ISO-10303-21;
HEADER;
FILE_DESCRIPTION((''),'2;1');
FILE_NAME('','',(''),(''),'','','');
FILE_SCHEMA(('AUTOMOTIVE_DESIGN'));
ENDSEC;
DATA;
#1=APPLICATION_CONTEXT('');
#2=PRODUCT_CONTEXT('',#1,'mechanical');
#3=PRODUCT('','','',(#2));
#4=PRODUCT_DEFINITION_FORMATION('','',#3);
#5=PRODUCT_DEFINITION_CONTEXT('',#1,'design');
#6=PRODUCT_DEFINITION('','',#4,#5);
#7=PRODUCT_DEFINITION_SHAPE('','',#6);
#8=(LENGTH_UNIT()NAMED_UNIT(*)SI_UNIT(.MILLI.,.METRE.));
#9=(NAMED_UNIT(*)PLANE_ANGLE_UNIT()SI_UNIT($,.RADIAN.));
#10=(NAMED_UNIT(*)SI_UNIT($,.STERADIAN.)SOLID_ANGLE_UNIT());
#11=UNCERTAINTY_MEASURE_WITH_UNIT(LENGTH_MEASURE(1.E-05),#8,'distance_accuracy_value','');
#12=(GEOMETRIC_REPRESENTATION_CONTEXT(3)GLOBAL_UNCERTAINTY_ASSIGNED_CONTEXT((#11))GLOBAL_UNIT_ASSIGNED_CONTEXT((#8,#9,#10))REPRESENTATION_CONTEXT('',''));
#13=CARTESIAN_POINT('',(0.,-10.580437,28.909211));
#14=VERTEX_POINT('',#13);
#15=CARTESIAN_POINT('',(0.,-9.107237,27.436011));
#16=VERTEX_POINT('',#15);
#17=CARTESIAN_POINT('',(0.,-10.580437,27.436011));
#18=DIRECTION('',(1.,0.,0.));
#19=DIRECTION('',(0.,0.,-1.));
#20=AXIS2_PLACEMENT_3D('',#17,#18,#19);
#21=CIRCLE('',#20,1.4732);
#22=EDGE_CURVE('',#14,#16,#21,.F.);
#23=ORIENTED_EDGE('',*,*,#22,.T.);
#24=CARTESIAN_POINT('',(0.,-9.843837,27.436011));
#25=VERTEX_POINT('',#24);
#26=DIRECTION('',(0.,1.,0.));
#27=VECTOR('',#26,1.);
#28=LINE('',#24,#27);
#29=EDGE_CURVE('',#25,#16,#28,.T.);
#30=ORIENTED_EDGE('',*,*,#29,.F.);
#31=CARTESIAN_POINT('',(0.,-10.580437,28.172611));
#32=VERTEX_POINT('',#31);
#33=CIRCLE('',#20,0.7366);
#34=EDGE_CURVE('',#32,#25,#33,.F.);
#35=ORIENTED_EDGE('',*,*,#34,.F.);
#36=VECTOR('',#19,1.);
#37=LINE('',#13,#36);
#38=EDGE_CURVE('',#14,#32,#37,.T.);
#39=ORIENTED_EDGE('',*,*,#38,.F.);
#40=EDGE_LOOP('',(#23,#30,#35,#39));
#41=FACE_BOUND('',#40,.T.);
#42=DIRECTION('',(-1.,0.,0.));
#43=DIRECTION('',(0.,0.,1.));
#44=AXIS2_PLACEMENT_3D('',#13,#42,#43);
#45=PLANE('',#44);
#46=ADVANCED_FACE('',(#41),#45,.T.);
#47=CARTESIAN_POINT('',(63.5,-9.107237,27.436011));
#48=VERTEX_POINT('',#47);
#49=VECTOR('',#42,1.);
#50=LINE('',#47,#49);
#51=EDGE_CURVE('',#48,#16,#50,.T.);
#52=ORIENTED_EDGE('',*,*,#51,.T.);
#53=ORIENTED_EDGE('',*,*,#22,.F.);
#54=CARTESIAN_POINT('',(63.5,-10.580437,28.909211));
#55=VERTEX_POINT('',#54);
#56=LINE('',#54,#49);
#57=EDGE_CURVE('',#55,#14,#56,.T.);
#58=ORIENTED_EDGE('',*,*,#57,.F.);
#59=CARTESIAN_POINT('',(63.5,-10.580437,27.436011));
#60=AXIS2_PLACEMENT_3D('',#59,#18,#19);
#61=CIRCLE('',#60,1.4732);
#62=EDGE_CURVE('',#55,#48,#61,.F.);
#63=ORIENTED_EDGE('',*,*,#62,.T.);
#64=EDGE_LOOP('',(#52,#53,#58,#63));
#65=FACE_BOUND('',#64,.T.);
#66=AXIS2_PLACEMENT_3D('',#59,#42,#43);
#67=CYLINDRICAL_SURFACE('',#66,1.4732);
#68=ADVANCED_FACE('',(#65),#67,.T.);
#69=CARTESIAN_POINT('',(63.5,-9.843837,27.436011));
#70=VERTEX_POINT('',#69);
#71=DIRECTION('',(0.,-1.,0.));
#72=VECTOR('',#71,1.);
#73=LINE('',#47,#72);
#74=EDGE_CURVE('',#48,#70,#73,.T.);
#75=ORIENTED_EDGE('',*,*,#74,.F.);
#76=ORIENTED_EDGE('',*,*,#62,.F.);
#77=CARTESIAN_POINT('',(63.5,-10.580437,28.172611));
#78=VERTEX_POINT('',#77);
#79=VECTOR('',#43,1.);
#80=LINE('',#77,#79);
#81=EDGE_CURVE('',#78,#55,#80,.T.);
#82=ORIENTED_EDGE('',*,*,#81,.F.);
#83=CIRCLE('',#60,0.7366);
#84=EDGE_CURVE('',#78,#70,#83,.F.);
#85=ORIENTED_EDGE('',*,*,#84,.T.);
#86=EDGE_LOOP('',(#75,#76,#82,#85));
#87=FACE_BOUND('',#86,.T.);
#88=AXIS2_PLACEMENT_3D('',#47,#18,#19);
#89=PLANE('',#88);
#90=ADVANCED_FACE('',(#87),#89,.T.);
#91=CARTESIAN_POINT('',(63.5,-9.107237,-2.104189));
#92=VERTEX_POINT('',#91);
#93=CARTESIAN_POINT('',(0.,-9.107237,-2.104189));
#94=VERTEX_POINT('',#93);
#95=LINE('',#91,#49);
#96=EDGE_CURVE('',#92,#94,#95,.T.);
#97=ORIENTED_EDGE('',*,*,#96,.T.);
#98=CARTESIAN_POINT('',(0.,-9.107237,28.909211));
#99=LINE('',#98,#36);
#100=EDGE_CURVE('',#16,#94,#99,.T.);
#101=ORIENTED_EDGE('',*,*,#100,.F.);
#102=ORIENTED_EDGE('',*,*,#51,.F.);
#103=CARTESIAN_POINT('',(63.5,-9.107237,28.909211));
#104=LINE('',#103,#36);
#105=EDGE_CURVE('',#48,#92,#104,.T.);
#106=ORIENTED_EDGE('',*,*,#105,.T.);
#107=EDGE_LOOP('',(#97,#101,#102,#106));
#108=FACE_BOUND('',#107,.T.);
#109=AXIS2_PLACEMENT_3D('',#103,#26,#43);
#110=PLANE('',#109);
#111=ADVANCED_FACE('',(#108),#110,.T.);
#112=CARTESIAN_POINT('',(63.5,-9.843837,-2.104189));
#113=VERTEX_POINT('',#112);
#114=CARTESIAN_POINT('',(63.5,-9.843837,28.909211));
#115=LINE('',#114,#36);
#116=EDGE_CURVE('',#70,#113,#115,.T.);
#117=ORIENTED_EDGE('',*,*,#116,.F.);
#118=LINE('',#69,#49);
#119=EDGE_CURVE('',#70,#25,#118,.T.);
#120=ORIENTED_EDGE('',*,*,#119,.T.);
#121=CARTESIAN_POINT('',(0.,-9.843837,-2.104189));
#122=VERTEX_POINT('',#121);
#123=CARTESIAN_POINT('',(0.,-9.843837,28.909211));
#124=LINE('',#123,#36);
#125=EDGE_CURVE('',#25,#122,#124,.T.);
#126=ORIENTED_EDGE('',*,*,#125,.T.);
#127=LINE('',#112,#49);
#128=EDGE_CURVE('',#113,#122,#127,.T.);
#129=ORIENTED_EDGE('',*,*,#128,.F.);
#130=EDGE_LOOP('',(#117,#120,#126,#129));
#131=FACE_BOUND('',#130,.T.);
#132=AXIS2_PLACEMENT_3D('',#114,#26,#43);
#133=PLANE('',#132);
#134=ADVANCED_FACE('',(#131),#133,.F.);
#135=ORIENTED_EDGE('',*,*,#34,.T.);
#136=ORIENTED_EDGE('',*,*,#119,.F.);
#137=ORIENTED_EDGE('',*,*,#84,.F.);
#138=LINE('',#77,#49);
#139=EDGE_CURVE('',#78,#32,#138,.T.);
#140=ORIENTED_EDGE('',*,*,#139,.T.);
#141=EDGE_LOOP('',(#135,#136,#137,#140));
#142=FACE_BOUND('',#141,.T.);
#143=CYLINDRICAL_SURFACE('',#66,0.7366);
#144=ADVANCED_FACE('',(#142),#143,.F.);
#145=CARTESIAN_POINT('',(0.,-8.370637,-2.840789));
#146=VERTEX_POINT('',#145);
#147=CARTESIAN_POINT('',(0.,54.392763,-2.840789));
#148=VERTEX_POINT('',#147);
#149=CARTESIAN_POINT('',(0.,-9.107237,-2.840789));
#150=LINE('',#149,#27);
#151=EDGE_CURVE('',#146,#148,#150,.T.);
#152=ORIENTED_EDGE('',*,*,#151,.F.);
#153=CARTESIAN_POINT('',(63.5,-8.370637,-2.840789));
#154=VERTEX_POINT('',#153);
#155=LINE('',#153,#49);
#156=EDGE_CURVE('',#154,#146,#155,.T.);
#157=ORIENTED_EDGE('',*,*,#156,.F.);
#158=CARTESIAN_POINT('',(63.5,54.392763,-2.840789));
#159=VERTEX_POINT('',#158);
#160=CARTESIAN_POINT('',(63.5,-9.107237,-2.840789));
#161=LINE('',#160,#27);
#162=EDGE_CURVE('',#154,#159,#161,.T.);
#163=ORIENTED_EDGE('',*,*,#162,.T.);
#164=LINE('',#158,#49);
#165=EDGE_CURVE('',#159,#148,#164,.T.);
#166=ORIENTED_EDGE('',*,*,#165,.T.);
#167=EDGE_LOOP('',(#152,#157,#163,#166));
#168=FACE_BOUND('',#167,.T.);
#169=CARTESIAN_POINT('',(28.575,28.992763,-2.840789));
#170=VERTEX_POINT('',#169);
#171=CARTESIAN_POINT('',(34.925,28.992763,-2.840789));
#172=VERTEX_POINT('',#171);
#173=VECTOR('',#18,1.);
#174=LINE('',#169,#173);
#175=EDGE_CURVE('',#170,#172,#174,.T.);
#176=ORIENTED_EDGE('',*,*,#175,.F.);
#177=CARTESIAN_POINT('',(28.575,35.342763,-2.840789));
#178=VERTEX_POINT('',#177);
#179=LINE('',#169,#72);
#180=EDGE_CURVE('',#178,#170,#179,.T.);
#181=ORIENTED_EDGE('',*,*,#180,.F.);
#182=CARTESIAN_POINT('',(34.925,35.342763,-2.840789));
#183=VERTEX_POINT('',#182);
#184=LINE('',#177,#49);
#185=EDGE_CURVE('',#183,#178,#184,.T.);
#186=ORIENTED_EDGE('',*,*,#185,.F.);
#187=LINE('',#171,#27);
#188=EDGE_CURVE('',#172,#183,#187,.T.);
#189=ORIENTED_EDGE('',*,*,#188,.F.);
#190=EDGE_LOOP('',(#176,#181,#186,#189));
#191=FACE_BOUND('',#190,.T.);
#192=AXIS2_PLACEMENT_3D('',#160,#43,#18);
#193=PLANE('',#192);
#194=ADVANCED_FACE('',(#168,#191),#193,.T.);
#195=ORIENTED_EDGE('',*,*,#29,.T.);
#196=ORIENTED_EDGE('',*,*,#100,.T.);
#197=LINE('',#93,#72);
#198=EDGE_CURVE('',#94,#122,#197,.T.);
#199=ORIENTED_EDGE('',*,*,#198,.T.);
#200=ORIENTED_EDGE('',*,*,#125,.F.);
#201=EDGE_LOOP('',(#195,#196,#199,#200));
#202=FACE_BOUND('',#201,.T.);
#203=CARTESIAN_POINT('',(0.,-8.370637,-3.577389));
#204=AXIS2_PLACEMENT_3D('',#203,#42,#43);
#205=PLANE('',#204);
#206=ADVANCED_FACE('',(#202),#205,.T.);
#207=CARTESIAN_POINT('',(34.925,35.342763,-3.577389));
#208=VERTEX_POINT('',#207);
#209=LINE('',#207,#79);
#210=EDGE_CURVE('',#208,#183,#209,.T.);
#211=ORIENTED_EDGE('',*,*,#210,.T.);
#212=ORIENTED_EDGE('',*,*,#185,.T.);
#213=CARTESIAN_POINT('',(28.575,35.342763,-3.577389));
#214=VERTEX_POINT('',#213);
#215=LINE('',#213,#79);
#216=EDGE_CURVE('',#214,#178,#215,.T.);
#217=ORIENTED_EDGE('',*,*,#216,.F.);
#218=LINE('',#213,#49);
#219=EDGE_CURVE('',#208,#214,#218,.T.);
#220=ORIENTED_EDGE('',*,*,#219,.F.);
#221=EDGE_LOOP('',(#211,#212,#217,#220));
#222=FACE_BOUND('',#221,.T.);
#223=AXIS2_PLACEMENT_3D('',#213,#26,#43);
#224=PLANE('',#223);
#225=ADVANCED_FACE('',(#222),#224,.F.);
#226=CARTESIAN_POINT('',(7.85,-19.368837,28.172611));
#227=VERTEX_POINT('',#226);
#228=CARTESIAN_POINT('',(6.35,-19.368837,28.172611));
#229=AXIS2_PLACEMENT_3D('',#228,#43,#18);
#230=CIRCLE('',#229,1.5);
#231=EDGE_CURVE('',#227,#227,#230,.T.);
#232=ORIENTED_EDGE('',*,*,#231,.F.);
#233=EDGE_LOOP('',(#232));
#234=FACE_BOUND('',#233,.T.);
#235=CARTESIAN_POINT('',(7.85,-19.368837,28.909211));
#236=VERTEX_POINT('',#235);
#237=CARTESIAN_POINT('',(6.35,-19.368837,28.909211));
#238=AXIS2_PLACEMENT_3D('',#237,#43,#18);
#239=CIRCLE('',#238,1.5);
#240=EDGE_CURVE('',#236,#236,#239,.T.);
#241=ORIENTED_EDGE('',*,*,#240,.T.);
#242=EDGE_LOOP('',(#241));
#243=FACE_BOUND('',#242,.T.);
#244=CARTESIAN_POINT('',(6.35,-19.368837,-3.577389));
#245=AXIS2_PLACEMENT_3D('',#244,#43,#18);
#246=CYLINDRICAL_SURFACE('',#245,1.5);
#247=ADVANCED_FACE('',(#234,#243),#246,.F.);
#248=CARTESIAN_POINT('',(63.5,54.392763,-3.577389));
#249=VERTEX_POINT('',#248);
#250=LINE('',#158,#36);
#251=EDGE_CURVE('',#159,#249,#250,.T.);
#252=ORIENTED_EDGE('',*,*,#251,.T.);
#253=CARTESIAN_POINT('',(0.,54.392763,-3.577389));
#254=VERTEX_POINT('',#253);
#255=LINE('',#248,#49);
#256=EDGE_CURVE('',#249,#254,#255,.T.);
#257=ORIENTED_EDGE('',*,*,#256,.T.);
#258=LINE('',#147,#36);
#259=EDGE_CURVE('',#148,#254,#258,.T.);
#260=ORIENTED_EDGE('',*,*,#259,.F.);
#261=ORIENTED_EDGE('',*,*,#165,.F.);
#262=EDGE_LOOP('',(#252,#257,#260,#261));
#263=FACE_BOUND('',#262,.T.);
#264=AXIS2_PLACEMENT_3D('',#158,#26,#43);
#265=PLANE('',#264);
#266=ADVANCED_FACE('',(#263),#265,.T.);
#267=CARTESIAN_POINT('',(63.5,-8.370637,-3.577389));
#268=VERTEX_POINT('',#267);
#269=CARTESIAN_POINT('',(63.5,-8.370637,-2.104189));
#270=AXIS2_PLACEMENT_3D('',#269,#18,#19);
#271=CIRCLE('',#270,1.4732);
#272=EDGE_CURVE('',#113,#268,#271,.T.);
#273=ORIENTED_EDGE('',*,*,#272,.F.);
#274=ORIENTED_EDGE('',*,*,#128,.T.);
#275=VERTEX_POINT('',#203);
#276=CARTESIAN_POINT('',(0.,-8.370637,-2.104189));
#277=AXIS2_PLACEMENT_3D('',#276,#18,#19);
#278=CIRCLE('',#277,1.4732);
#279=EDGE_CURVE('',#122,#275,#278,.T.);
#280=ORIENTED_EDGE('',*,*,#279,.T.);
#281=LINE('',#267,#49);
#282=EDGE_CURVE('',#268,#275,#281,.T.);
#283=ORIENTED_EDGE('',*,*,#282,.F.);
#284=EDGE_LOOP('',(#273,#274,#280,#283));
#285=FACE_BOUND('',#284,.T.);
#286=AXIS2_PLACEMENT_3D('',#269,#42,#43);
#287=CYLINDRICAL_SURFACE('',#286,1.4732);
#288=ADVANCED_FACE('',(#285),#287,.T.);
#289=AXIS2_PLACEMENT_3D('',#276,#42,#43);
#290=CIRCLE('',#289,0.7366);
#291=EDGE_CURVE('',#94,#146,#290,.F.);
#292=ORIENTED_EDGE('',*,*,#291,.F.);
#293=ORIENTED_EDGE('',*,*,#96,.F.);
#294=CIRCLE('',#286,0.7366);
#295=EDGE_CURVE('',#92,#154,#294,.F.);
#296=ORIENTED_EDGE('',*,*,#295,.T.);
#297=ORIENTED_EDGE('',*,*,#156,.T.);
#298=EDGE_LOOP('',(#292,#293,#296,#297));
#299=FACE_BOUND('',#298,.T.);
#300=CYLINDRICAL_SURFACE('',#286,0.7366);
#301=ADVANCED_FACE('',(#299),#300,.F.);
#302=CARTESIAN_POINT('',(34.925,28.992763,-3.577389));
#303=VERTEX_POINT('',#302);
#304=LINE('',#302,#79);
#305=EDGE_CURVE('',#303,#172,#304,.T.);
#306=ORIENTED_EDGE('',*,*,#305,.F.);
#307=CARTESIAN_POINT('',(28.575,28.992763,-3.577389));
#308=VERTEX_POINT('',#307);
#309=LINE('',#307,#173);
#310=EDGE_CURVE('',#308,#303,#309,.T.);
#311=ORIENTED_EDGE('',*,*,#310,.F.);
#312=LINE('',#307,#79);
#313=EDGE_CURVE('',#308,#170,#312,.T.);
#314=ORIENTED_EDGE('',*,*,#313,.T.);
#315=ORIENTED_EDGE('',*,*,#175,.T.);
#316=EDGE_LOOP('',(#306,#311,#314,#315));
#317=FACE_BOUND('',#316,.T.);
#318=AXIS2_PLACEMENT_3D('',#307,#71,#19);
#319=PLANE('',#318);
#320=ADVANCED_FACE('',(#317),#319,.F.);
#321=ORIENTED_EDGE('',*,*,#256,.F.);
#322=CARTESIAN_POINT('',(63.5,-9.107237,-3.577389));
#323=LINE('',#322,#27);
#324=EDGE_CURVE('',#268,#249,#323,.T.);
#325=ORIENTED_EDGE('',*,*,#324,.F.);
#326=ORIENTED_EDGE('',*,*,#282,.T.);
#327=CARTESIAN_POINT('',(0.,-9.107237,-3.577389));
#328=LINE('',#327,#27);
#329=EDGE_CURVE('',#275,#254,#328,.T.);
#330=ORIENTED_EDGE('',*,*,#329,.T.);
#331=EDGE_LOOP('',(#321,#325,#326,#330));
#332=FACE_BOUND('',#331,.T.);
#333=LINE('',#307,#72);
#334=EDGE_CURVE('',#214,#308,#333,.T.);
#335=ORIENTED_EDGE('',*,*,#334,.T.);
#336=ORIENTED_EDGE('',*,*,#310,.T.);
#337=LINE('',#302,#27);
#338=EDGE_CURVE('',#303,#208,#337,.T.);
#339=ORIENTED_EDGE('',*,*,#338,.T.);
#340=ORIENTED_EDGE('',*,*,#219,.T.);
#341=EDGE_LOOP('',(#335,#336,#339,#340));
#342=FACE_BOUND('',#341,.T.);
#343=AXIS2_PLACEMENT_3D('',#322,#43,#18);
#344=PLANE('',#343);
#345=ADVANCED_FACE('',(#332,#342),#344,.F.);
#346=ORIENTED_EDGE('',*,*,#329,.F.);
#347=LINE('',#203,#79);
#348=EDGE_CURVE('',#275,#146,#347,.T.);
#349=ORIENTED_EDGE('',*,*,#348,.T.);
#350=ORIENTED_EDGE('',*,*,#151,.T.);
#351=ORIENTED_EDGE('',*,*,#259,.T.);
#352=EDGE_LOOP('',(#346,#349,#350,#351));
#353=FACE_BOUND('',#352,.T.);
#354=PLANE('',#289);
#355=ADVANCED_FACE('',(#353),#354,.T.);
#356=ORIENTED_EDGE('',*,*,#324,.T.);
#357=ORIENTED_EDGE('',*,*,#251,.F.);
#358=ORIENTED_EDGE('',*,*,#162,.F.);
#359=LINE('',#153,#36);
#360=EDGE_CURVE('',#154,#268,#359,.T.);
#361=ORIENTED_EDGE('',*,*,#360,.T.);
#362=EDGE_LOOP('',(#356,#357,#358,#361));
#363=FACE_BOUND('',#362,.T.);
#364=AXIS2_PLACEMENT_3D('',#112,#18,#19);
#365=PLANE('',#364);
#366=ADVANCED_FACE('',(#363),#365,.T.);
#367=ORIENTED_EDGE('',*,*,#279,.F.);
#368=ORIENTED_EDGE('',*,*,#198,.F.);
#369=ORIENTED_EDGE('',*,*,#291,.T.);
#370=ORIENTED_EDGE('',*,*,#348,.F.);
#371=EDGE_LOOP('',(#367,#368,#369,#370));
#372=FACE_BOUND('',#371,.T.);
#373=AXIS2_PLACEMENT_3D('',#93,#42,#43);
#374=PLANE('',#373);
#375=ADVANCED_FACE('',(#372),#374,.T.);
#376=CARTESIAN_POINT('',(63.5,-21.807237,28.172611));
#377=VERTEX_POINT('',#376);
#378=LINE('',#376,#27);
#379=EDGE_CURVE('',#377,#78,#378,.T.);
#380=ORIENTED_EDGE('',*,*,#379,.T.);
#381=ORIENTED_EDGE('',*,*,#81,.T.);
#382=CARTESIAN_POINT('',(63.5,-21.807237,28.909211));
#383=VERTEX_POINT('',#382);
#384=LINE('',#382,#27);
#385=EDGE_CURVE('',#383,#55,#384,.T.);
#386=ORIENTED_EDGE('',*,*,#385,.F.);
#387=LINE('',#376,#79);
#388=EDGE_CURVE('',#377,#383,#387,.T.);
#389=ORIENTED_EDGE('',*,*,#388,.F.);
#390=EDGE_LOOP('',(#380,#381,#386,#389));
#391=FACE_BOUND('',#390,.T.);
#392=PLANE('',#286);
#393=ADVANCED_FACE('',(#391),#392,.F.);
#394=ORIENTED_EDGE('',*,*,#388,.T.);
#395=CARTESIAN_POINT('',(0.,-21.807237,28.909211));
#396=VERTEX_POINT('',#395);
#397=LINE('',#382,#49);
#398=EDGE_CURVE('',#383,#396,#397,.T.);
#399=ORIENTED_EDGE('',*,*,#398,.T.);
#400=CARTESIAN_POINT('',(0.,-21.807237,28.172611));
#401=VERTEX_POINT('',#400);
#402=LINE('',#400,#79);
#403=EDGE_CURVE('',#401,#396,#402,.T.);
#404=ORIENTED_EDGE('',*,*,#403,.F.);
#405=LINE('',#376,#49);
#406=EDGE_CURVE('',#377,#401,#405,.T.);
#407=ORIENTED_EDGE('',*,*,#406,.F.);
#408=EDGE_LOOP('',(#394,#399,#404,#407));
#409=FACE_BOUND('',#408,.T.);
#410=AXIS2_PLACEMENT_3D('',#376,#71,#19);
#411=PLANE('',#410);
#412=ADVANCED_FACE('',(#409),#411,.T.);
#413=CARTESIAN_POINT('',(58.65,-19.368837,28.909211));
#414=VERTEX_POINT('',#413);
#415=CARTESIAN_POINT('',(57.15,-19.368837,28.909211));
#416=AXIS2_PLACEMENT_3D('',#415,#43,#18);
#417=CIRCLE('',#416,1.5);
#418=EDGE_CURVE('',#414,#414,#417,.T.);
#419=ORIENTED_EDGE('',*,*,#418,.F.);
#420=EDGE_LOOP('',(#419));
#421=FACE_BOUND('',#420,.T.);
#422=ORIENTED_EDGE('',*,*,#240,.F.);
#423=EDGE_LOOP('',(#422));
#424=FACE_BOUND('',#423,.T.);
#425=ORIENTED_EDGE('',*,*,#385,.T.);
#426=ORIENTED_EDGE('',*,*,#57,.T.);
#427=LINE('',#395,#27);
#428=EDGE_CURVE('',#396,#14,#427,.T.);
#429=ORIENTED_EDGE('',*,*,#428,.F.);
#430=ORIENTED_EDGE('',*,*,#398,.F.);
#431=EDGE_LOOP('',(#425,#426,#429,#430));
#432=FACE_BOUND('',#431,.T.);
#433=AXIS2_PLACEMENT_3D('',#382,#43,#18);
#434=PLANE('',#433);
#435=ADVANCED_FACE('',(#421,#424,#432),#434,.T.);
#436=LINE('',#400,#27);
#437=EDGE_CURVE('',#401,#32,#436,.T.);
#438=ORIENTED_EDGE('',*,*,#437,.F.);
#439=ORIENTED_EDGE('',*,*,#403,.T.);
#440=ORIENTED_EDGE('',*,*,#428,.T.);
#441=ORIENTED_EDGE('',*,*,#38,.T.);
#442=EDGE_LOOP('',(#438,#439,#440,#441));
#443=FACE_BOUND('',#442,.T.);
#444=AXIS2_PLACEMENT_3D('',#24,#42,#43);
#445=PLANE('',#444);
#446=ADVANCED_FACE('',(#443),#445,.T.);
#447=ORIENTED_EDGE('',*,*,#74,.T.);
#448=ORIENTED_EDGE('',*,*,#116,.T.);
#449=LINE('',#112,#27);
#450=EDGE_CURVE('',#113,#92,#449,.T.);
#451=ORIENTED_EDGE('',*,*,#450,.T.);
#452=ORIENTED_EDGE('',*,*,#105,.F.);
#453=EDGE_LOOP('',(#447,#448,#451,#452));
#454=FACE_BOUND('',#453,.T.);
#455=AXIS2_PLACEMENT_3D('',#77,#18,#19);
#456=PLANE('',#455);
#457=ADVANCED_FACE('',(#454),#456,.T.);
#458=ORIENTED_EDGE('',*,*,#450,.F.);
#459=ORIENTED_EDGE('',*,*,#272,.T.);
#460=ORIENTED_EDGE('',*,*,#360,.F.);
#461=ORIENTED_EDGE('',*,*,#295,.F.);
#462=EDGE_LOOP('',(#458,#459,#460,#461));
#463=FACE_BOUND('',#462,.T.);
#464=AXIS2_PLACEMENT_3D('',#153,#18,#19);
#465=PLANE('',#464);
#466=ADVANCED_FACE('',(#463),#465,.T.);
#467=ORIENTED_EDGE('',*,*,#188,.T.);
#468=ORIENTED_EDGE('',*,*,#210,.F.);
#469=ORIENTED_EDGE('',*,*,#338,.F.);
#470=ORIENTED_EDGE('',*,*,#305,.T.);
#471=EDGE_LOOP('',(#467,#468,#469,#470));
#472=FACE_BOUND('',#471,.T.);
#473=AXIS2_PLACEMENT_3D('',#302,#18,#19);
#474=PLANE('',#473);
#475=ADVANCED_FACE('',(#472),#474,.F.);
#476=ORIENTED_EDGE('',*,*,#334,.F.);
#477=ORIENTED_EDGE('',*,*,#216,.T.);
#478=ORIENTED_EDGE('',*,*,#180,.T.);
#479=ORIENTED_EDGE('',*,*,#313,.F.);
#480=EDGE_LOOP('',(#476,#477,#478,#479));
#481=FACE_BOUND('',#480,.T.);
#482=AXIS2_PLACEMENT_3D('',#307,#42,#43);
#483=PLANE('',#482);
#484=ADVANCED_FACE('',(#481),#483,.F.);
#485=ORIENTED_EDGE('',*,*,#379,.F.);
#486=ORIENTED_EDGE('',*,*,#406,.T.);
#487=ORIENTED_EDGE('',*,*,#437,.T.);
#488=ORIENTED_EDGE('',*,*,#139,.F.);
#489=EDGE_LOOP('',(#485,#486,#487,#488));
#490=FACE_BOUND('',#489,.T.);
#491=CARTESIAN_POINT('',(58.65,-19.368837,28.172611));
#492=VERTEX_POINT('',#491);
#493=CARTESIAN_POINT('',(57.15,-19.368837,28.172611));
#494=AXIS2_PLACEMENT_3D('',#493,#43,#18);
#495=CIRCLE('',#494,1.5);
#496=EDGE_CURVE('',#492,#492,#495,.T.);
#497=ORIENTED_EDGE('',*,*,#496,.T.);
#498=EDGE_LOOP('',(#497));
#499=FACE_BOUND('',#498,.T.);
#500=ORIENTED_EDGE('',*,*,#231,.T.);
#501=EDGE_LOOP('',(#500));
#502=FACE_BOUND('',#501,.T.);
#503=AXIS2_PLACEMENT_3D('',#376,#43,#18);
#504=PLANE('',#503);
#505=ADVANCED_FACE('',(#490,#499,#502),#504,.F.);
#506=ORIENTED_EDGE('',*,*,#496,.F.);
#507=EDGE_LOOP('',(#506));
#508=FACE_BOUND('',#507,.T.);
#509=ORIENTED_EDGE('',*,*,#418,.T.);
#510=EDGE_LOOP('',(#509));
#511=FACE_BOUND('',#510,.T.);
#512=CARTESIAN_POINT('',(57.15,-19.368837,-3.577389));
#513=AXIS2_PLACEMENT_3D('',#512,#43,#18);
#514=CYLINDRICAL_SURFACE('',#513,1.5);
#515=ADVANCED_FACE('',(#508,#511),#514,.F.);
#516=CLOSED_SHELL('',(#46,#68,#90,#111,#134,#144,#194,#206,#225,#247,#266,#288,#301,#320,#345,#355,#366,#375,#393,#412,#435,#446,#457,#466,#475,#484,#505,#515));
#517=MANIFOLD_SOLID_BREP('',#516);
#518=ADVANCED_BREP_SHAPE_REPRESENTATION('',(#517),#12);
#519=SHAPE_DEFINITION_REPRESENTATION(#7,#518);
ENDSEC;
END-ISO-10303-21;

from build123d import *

# Parameters (mm, degrees)
BASE_FLANGE1_DEPTH = 63.5
HOLE1_START        = 28.172610526
HOLE1_OUTLINE_R    = 1.5
HOLE1_DEPTH        = 0.7366
SKETCH8_W          = 6.35
SKETCH8_H          = 6.35
CUT_EXTRUDE1_DEPTH = 90.436486872


# Read off the part's stored shape, not the designer's step: Hole1
# Sheet-metal steps are written as plain solids
with BuildPart() as part:
    # Sketch2 → Base-Flange1 (new body)
    with BuildSketch(Plane(origin=(0, 0, 0), x_dir=(0, 0, -1), z_dir=(1, 0, 0))):
        with BuildLine():
            Line((-28.909210526, -21.807236842), (-28.909210526, -10.580436842))
            ThreePointArc((-28.909210526, -10.580436842), (-28.477720236, -9.538727132), (-27.436010526, -9.107236842))
            Line((-27.436010526, -9.107236842), (2.104189474, -9.107236842))
            ThreePointArc((2.104189474, -9.107236842), (2.625044329, -8.891491697), (2.840789474, -8.370636842))
            Line((2.840789474, -8.370636842), (2.840789474, 54.392763158))
            Line((2.840789474, 54.392763158), (3.577389474, 54.392763158))
            Line((3.577389474, 54.392763158), (3.577389474, -8.370636842))
            ThreePointArc((3.577389474, -8.370636842), (3.145899184, -9.412346552), (2.104189474, -9.843836842))
            Line((2.104189474, -9.843836842), (-27.436010526, -9.843836842))
            ThreePointArc((-27.436010526, -9.843836842), (-27.956865381, -10.059581987), (-28.172610526, -10.580436842))
            Line((-28.172610526, -10.580436842), (-28.172610526, -21.807236842))
            Line((-28.172610526, -21.807236842), (-28.909210526, -21.807236842))
        make_face()
    extrude(amount=BASE_FLANGE1_DEPTH)

    # Hole1 outline → Hole1 (cut)
    with BuildSketch(Plane.XY.offset(HOLE1_START)):
        with Locations((6.35, -19.368836842)):
            Circle(HOLE1_OUTLINE_R)
        with Locations((57.15, -19.368836842)):
            Circle(HOLE1_OUTLINE_R)
    extrude(amount=HOLE1_DEPTH, mode=Mode.SUBTRACT)

    # Sketch8 → Cut-Extrude1 (cut, through all)
    with BuildSketch(Plane.XY.offset(-2.840789474)):
        with Locations((31.75, 32.167763158)):
            Rectangle(SKETCH8_W, SKETCH8_H)
    extrude(amount=-CUT_EXTRUDE1_DEPTH, mode=Mode.SUBTRACT)


solid = part.part
